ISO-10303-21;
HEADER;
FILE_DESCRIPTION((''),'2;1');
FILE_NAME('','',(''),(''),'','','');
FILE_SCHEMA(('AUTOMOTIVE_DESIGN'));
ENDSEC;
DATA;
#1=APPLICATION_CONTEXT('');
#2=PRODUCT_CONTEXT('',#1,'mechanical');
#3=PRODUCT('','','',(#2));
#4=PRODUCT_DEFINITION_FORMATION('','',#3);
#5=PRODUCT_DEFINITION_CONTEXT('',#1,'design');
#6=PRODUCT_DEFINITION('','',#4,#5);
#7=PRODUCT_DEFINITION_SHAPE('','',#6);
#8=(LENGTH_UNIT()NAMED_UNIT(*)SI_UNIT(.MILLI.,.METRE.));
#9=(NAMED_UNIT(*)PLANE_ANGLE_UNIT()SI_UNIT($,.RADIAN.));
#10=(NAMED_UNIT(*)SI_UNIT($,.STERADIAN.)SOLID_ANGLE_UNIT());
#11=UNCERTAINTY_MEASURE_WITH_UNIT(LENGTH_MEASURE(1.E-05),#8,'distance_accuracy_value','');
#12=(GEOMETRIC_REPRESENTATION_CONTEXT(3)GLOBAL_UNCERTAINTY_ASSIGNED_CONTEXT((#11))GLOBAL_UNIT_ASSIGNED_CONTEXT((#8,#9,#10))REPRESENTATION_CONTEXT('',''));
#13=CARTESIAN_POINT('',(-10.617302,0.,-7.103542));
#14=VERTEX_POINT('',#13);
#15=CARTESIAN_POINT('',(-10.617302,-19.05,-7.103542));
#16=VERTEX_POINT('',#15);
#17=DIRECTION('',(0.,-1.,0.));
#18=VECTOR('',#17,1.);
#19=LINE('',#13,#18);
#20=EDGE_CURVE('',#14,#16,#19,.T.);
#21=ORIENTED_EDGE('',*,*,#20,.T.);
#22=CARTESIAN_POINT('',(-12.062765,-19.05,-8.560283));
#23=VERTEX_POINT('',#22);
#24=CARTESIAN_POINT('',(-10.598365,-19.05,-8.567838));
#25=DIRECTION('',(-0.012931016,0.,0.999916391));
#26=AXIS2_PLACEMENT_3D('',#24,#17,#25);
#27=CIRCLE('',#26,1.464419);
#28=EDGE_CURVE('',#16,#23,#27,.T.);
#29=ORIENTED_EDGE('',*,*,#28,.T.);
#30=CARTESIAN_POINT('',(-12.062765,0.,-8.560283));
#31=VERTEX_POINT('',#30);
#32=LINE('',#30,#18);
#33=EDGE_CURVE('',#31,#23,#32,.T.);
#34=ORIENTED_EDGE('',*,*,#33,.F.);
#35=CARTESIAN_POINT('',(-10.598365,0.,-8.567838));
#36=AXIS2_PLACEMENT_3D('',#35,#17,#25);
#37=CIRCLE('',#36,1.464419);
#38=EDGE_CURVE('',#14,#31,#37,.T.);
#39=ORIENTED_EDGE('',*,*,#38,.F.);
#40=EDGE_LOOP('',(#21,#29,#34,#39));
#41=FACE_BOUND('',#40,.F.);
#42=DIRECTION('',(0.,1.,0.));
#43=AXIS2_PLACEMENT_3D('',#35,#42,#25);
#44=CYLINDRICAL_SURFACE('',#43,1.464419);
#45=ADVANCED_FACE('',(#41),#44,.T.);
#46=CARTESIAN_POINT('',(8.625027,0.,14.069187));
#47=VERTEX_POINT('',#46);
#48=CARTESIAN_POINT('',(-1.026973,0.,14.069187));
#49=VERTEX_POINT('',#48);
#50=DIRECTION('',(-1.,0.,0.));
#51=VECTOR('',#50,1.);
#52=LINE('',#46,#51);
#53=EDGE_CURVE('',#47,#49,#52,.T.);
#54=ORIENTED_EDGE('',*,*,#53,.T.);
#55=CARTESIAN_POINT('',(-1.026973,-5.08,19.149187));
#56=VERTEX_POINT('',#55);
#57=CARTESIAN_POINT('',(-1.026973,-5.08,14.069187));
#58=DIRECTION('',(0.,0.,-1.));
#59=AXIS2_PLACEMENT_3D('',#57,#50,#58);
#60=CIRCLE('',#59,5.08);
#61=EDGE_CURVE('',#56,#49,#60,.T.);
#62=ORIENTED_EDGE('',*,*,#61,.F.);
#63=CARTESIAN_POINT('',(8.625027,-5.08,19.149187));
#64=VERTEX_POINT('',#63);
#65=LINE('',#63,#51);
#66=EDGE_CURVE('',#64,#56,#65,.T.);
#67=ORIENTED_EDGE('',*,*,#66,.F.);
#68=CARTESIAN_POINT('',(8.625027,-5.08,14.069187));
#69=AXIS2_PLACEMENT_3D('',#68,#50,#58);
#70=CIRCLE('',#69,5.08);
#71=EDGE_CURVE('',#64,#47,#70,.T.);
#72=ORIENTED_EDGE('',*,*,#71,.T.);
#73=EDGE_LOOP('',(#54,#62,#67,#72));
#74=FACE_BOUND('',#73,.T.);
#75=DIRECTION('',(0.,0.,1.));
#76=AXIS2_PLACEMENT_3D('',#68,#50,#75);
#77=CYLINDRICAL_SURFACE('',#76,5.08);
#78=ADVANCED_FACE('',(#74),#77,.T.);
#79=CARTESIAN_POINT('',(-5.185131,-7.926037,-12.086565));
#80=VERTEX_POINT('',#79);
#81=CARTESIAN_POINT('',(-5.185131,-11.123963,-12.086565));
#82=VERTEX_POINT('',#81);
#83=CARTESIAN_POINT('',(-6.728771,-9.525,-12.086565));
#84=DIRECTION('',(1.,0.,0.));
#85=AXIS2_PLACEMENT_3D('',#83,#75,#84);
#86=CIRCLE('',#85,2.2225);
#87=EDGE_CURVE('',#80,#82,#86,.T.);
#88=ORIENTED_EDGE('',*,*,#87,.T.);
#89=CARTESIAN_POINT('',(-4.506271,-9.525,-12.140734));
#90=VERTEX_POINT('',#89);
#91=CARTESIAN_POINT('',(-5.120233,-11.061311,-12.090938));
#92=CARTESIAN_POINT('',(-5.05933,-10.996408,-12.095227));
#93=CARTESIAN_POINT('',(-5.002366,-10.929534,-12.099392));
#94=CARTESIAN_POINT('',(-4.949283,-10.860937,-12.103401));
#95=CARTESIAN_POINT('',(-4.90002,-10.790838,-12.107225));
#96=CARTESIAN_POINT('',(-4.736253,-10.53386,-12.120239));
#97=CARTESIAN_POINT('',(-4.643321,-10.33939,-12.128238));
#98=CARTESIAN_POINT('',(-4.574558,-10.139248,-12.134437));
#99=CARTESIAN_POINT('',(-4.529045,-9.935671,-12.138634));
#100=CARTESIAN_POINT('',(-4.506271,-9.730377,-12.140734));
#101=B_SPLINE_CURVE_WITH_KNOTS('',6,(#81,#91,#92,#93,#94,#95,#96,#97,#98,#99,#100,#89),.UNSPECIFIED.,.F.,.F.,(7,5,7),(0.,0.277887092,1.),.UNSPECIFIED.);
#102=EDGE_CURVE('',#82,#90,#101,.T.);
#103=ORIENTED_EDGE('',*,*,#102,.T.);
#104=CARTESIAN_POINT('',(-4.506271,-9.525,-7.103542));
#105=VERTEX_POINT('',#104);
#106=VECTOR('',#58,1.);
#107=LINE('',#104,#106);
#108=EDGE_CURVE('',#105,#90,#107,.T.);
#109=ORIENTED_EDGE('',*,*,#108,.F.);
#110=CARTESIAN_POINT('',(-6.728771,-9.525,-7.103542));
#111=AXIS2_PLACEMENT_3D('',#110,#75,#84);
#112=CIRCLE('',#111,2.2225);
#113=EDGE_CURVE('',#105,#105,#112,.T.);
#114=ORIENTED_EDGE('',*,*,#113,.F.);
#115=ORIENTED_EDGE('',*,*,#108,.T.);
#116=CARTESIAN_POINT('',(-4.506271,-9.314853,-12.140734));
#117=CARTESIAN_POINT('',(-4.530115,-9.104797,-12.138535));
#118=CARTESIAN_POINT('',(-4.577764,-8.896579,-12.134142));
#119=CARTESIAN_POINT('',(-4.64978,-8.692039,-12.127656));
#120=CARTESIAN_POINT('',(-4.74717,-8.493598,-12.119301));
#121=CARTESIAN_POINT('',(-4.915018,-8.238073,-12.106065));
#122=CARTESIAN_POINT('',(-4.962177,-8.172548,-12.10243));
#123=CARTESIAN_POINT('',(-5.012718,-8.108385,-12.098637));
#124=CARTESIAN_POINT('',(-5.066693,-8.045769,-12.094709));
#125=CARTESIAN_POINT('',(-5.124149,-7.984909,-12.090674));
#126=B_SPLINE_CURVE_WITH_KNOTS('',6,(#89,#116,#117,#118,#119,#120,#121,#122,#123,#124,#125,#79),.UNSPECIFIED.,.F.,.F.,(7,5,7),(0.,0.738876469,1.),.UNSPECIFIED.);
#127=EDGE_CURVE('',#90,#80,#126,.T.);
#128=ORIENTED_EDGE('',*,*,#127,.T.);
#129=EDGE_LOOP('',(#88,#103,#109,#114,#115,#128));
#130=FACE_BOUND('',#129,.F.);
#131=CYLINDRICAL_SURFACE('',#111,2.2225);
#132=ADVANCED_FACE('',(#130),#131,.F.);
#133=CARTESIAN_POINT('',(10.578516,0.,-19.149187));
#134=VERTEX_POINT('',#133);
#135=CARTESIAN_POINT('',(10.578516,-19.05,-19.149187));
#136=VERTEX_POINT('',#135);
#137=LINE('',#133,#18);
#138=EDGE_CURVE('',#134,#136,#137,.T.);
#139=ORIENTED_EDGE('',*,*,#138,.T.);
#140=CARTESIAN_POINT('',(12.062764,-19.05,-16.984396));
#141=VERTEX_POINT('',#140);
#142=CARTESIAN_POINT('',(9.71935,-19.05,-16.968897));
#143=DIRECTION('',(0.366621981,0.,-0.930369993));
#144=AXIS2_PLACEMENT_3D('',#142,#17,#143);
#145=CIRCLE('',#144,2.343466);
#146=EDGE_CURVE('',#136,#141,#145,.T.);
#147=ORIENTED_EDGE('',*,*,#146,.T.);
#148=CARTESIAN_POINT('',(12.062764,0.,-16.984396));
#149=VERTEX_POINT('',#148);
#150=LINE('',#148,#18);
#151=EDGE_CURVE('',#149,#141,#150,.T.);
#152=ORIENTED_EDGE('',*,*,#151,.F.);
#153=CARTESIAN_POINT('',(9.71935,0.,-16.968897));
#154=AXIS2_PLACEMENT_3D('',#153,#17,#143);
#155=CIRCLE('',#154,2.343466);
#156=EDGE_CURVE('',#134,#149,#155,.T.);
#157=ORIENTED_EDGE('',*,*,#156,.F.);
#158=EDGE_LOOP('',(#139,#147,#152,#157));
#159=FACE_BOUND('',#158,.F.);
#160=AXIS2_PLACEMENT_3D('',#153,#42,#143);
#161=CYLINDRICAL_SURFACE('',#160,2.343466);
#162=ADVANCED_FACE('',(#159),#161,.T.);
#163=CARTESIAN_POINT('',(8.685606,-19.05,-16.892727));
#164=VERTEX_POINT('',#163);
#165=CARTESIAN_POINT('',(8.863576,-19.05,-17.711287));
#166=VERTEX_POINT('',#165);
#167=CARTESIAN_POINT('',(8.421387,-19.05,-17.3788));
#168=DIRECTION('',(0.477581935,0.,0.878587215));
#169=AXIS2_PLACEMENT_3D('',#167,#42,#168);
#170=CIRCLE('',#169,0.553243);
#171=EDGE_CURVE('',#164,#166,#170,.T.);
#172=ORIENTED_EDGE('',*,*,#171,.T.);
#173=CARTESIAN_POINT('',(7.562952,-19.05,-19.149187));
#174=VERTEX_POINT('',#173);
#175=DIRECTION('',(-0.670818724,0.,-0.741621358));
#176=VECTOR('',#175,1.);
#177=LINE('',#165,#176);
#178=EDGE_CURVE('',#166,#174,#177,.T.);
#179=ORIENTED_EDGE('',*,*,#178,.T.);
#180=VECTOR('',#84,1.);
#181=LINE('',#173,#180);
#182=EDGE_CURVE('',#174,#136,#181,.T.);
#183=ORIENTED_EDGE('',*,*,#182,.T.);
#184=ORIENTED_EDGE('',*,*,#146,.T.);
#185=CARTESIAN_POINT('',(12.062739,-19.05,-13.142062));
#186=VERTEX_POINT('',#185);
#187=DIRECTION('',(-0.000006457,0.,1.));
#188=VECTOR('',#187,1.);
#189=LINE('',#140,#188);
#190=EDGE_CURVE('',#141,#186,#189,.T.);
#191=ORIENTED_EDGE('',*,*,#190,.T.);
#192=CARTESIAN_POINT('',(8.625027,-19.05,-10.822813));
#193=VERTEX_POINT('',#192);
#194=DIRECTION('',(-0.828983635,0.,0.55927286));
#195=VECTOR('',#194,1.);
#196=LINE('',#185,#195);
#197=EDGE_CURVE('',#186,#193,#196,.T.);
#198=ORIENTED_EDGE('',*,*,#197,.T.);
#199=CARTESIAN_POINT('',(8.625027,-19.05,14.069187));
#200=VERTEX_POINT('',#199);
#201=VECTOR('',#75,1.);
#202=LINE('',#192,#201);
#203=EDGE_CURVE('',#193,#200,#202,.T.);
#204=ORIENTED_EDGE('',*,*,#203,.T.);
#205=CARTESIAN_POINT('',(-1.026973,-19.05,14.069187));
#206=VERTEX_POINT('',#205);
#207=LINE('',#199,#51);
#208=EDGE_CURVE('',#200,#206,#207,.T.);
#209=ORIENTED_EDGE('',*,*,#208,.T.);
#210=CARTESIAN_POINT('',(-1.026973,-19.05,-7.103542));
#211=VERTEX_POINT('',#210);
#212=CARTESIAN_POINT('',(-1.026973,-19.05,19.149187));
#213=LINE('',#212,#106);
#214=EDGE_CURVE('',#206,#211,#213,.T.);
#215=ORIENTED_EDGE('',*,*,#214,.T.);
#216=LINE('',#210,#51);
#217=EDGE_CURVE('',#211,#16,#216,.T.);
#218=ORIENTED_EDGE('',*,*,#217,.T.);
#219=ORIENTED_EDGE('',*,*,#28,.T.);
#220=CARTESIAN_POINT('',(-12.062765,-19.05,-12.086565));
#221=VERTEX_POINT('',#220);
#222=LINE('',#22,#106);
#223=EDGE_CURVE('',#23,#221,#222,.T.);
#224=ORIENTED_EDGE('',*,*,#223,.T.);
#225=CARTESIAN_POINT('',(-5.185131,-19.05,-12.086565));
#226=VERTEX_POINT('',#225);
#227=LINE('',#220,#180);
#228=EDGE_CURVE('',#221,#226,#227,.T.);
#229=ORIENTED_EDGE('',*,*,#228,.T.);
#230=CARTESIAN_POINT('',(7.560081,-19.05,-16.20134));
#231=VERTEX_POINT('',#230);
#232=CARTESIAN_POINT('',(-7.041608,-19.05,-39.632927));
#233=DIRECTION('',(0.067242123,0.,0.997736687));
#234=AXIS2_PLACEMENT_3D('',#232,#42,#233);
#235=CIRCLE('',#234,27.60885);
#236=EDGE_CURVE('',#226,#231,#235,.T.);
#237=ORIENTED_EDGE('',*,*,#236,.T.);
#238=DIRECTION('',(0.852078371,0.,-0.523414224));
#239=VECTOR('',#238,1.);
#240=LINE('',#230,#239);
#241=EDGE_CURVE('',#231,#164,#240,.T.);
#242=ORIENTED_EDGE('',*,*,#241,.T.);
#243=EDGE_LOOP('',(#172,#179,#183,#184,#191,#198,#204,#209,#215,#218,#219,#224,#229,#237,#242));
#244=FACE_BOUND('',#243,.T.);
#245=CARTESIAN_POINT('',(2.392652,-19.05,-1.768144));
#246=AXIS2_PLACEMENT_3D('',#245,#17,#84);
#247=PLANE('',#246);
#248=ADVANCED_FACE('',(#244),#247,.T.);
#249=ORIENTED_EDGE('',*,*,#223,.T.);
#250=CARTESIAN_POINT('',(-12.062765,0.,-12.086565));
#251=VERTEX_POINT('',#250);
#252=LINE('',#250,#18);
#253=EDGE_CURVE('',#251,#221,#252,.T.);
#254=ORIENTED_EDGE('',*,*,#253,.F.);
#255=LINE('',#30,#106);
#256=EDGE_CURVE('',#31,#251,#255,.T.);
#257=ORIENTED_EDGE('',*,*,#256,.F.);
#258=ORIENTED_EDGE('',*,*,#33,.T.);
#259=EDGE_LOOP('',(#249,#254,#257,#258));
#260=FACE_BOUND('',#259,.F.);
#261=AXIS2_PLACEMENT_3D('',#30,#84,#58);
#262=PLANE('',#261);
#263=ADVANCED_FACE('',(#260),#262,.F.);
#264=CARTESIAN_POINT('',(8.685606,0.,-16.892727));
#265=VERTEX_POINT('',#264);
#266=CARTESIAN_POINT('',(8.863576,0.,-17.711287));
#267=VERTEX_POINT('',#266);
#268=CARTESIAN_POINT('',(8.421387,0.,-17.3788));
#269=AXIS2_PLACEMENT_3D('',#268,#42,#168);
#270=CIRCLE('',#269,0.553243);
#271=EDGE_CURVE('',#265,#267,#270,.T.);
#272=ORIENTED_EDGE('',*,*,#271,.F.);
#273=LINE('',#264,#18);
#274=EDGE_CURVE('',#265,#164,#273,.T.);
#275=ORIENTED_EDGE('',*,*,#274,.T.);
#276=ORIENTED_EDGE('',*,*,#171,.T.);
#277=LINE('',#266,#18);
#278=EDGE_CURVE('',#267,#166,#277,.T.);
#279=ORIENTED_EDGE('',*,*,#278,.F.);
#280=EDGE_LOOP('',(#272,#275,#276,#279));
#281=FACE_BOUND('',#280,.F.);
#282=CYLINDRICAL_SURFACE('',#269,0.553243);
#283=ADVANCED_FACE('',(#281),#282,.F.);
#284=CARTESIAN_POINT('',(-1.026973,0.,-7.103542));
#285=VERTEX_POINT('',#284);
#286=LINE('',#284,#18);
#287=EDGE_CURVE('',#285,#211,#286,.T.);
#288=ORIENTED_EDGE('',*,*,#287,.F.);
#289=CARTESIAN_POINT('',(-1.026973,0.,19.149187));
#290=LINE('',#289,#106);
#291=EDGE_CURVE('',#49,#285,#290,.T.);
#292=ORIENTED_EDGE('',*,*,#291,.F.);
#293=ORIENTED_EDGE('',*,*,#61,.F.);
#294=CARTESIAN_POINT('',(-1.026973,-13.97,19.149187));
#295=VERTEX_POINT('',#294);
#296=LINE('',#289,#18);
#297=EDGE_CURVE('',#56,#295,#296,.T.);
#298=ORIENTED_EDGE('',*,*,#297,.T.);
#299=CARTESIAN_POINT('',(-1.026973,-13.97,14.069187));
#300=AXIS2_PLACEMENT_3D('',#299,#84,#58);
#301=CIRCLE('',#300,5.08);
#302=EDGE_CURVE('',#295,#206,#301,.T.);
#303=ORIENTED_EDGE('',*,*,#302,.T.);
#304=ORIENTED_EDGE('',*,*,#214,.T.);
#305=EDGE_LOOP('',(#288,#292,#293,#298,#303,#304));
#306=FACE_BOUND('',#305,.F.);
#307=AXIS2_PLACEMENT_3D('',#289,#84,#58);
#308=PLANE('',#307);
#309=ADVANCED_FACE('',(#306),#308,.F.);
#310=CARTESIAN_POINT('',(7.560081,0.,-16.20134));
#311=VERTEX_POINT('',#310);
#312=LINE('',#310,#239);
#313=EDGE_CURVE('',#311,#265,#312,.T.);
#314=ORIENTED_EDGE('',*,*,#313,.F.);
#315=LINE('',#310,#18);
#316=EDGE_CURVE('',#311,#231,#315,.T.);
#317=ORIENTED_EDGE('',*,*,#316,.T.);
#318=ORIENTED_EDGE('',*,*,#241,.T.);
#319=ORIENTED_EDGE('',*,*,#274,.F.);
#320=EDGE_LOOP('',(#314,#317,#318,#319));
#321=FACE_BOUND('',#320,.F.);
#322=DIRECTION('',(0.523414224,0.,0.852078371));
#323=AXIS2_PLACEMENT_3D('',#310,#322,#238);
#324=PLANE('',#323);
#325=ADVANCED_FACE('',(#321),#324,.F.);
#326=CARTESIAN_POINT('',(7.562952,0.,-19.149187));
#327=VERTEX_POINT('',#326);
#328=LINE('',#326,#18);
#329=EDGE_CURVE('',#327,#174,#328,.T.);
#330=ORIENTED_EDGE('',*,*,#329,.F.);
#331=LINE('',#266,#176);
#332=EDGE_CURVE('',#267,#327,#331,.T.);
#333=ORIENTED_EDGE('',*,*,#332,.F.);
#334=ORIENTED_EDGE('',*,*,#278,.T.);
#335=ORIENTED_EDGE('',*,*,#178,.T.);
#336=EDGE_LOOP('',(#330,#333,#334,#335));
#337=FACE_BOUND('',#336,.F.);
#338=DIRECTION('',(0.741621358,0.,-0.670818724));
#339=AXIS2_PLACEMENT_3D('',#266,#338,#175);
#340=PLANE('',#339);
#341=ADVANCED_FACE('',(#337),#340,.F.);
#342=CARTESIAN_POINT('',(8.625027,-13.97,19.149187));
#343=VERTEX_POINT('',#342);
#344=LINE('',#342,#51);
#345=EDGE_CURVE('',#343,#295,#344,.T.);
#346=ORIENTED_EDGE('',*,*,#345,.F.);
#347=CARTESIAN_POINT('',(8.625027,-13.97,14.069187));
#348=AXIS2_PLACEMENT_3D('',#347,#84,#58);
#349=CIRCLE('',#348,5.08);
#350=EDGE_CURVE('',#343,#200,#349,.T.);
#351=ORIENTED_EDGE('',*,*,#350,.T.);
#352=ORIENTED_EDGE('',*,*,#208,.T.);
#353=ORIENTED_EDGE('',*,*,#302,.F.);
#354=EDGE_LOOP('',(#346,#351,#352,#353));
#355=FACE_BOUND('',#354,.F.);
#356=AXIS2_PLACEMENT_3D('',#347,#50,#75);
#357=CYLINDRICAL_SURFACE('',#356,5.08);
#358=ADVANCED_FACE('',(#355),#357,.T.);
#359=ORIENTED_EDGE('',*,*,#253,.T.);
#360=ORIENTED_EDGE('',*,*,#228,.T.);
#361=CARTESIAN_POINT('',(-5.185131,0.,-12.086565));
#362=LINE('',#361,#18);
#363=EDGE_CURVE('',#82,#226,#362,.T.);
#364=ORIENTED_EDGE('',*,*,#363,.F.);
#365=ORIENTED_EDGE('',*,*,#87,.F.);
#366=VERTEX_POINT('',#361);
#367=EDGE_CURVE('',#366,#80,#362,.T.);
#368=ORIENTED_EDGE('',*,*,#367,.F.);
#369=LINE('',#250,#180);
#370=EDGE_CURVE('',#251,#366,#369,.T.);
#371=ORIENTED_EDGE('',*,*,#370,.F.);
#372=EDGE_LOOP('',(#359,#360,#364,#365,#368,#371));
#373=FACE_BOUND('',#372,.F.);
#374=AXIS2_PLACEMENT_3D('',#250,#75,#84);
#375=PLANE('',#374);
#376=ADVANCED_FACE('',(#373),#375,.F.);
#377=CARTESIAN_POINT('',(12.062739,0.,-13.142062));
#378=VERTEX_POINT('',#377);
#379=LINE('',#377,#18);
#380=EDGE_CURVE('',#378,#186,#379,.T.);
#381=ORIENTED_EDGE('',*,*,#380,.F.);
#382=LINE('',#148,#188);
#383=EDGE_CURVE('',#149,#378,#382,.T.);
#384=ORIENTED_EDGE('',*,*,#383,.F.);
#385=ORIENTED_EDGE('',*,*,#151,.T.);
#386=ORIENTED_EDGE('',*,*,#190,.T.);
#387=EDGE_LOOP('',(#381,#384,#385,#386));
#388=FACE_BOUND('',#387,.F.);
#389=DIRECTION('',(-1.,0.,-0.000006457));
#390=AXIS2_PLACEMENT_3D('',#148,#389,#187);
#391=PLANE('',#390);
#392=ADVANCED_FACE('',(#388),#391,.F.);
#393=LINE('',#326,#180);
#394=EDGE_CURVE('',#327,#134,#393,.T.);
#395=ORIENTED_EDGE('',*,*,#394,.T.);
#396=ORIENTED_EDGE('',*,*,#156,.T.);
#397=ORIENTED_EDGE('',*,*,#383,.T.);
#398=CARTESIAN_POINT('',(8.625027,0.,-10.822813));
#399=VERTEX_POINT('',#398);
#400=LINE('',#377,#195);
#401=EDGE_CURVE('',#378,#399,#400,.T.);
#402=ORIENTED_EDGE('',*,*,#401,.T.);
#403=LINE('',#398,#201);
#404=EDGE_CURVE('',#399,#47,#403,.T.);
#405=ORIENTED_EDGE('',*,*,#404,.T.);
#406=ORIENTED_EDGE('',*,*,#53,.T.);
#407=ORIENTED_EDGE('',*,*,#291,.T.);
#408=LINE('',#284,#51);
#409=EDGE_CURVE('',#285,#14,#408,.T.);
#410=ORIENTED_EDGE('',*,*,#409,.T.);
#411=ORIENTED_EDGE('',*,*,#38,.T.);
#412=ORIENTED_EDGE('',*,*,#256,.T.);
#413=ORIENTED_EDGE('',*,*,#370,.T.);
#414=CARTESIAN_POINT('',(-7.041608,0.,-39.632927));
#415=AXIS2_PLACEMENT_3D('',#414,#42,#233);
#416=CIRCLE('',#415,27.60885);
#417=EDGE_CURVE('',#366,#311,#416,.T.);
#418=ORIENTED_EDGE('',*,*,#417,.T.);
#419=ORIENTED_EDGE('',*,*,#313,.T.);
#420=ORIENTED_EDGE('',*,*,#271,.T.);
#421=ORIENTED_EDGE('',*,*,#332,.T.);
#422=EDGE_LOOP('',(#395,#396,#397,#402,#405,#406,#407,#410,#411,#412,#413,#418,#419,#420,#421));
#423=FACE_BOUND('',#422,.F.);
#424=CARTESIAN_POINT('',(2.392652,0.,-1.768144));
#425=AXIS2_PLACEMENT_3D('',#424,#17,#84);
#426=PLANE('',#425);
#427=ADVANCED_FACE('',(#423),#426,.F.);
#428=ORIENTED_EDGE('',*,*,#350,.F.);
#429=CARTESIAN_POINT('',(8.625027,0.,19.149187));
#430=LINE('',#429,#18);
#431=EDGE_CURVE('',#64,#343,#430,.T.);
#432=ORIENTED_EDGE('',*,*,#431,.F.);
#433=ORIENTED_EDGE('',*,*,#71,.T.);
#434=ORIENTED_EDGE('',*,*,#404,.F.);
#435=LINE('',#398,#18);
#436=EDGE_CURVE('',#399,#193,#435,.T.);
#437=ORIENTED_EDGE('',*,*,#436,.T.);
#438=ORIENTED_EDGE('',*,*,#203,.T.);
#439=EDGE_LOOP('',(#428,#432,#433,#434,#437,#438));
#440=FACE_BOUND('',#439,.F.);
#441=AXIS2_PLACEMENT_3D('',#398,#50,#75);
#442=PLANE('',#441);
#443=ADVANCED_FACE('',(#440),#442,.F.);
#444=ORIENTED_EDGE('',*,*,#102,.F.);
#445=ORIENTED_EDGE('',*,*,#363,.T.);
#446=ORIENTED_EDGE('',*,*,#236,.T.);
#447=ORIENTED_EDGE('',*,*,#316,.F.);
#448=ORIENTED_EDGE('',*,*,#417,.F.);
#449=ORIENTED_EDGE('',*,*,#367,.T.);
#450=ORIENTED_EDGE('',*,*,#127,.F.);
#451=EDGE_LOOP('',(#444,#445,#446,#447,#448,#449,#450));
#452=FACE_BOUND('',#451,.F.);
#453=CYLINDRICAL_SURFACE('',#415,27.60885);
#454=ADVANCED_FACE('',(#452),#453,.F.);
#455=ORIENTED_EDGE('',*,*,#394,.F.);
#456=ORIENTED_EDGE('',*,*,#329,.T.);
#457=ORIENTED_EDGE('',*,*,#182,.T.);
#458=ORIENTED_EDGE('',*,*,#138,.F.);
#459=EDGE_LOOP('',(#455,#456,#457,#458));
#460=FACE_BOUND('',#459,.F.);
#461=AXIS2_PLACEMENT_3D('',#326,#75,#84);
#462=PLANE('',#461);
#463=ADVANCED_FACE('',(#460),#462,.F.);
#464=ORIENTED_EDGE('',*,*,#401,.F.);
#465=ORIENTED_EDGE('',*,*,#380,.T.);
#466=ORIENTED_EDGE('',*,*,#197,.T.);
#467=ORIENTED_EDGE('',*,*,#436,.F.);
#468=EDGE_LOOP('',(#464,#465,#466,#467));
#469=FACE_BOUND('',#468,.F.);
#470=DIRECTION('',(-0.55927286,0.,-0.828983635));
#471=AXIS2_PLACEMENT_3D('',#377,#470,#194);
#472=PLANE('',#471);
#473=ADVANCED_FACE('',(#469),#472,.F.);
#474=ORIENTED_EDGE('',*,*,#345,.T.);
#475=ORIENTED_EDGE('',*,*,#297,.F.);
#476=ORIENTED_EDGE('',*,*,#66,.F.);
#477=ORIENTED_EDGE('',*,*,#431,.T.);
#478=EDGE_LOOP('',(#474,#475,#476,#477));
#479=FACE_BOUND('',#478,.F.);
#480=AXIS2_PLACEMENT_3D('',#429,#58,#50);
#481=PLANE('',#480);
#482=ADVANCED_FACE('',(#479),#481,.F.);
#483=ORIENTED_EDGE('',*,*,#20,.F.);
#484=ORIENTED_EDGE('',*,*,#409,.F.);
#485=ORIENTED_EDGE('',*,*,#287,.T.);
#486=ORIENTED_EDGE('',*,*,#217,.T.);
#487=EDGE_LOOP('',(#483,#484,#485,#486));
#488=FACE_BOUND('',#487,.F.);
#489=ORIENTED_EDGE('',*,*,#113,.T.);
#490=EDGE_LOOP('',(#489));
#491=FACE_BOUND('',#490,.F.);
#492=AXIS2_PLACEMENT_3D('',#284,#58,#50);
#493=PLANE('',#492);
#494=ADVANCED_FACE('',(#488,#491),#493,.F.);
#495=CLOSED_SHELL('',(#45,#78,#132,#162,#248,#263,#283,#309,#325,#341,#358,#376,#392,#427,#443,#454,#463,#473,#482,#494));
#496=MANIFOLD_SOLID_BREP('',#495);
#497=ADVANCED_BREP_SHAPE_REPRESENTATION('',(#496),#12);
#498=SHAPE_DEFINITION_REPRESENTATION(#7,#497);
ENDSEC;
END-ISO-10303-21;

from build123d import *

# Parameters (mm, degrees)
F1_DEPTH = 19.05
F2_R     = 5.08
F3_R     = 2.2225
F4_DEPTH = 12.0466452


# Not quite as in the source:
# - ends of sketch curves that miss each other by under 0.0002 mm in the source are joined


with BuildPart() as f1:
    # F0 (on Front) → F1 (new body)
    with BuildSketch(Plane.XZ):
        with BuildLine():
            Line((-12.0627648, -8.5602826), (-12.0627648, -12.0865646))
            Line((-12.0627648, -12.0865646), (-5.1851306, -12.0865646))
            ThreePointArc((-5.1851306, -12.0865646), (1.4407652276, -13.3594055352), (7.5600808337, -16.2013401088))
            Line((7.5600808337, -16.2013401088), (8.6856062, -16.8927272))
            ThreePointArc((8.6856062, -16.8927272), (8.9620015383, -17.2612655931), (8.8635755348, -17.7112866346))
            Line((8.8635755348, -17.7112866346), (7.5629516, -19.149187))
            Line((7.5629516, -19.149187), (10.5785158, -19.149187))
            ThreePointArc((10.5785158, -19.149187), (11.6521464417, -18.2940868169), (12.0627642118, -16.9843959643))
            Line((12.0627642118, -16.9843959643), (12.0627394, -13.1420616))
            Line((12.0627394, -13.1420616), (8.6250272, -10.822813))
            Line((8.6250272, -10.822813), (8.6250272, 19.149187))
            Line((8.6250272, 19.149187), (-1.0269728, 19.149187))
            Line((-1.0269728, 19.149187), (-1.0269728, -7.1035418))
            Line((-1.0269728, -7.1035418), (-10.6173016, -7.1035418))
            ThreePointArc((-10.6173016, -7.1035418), (-11.6378820464, -7.5363696119), (-12.0627648, -8.5602826))
        make_face()
    extrude(amount=F1_DEPTH)

    # F2
    f2_edges = [f1.edges().sort_by_distance(p)[0] for p in [
        (3.799027, -19.05, 19.149187),
        (3.799027, 0, 19.149187),
    ]]
    fillet(f2_edges, radius=F2_R)

    # F3 (on face) → F4 (cut, through all)
    with BuildSketch(Plane.XY.offset(-7.1035418)):
        with Locations((-6.7287706383, -9.525)):
            Circle(F3_R)
    extrude(amount=-F4_DEPTH, mode=Mode.SUBTRACT)


solid = f1.part
